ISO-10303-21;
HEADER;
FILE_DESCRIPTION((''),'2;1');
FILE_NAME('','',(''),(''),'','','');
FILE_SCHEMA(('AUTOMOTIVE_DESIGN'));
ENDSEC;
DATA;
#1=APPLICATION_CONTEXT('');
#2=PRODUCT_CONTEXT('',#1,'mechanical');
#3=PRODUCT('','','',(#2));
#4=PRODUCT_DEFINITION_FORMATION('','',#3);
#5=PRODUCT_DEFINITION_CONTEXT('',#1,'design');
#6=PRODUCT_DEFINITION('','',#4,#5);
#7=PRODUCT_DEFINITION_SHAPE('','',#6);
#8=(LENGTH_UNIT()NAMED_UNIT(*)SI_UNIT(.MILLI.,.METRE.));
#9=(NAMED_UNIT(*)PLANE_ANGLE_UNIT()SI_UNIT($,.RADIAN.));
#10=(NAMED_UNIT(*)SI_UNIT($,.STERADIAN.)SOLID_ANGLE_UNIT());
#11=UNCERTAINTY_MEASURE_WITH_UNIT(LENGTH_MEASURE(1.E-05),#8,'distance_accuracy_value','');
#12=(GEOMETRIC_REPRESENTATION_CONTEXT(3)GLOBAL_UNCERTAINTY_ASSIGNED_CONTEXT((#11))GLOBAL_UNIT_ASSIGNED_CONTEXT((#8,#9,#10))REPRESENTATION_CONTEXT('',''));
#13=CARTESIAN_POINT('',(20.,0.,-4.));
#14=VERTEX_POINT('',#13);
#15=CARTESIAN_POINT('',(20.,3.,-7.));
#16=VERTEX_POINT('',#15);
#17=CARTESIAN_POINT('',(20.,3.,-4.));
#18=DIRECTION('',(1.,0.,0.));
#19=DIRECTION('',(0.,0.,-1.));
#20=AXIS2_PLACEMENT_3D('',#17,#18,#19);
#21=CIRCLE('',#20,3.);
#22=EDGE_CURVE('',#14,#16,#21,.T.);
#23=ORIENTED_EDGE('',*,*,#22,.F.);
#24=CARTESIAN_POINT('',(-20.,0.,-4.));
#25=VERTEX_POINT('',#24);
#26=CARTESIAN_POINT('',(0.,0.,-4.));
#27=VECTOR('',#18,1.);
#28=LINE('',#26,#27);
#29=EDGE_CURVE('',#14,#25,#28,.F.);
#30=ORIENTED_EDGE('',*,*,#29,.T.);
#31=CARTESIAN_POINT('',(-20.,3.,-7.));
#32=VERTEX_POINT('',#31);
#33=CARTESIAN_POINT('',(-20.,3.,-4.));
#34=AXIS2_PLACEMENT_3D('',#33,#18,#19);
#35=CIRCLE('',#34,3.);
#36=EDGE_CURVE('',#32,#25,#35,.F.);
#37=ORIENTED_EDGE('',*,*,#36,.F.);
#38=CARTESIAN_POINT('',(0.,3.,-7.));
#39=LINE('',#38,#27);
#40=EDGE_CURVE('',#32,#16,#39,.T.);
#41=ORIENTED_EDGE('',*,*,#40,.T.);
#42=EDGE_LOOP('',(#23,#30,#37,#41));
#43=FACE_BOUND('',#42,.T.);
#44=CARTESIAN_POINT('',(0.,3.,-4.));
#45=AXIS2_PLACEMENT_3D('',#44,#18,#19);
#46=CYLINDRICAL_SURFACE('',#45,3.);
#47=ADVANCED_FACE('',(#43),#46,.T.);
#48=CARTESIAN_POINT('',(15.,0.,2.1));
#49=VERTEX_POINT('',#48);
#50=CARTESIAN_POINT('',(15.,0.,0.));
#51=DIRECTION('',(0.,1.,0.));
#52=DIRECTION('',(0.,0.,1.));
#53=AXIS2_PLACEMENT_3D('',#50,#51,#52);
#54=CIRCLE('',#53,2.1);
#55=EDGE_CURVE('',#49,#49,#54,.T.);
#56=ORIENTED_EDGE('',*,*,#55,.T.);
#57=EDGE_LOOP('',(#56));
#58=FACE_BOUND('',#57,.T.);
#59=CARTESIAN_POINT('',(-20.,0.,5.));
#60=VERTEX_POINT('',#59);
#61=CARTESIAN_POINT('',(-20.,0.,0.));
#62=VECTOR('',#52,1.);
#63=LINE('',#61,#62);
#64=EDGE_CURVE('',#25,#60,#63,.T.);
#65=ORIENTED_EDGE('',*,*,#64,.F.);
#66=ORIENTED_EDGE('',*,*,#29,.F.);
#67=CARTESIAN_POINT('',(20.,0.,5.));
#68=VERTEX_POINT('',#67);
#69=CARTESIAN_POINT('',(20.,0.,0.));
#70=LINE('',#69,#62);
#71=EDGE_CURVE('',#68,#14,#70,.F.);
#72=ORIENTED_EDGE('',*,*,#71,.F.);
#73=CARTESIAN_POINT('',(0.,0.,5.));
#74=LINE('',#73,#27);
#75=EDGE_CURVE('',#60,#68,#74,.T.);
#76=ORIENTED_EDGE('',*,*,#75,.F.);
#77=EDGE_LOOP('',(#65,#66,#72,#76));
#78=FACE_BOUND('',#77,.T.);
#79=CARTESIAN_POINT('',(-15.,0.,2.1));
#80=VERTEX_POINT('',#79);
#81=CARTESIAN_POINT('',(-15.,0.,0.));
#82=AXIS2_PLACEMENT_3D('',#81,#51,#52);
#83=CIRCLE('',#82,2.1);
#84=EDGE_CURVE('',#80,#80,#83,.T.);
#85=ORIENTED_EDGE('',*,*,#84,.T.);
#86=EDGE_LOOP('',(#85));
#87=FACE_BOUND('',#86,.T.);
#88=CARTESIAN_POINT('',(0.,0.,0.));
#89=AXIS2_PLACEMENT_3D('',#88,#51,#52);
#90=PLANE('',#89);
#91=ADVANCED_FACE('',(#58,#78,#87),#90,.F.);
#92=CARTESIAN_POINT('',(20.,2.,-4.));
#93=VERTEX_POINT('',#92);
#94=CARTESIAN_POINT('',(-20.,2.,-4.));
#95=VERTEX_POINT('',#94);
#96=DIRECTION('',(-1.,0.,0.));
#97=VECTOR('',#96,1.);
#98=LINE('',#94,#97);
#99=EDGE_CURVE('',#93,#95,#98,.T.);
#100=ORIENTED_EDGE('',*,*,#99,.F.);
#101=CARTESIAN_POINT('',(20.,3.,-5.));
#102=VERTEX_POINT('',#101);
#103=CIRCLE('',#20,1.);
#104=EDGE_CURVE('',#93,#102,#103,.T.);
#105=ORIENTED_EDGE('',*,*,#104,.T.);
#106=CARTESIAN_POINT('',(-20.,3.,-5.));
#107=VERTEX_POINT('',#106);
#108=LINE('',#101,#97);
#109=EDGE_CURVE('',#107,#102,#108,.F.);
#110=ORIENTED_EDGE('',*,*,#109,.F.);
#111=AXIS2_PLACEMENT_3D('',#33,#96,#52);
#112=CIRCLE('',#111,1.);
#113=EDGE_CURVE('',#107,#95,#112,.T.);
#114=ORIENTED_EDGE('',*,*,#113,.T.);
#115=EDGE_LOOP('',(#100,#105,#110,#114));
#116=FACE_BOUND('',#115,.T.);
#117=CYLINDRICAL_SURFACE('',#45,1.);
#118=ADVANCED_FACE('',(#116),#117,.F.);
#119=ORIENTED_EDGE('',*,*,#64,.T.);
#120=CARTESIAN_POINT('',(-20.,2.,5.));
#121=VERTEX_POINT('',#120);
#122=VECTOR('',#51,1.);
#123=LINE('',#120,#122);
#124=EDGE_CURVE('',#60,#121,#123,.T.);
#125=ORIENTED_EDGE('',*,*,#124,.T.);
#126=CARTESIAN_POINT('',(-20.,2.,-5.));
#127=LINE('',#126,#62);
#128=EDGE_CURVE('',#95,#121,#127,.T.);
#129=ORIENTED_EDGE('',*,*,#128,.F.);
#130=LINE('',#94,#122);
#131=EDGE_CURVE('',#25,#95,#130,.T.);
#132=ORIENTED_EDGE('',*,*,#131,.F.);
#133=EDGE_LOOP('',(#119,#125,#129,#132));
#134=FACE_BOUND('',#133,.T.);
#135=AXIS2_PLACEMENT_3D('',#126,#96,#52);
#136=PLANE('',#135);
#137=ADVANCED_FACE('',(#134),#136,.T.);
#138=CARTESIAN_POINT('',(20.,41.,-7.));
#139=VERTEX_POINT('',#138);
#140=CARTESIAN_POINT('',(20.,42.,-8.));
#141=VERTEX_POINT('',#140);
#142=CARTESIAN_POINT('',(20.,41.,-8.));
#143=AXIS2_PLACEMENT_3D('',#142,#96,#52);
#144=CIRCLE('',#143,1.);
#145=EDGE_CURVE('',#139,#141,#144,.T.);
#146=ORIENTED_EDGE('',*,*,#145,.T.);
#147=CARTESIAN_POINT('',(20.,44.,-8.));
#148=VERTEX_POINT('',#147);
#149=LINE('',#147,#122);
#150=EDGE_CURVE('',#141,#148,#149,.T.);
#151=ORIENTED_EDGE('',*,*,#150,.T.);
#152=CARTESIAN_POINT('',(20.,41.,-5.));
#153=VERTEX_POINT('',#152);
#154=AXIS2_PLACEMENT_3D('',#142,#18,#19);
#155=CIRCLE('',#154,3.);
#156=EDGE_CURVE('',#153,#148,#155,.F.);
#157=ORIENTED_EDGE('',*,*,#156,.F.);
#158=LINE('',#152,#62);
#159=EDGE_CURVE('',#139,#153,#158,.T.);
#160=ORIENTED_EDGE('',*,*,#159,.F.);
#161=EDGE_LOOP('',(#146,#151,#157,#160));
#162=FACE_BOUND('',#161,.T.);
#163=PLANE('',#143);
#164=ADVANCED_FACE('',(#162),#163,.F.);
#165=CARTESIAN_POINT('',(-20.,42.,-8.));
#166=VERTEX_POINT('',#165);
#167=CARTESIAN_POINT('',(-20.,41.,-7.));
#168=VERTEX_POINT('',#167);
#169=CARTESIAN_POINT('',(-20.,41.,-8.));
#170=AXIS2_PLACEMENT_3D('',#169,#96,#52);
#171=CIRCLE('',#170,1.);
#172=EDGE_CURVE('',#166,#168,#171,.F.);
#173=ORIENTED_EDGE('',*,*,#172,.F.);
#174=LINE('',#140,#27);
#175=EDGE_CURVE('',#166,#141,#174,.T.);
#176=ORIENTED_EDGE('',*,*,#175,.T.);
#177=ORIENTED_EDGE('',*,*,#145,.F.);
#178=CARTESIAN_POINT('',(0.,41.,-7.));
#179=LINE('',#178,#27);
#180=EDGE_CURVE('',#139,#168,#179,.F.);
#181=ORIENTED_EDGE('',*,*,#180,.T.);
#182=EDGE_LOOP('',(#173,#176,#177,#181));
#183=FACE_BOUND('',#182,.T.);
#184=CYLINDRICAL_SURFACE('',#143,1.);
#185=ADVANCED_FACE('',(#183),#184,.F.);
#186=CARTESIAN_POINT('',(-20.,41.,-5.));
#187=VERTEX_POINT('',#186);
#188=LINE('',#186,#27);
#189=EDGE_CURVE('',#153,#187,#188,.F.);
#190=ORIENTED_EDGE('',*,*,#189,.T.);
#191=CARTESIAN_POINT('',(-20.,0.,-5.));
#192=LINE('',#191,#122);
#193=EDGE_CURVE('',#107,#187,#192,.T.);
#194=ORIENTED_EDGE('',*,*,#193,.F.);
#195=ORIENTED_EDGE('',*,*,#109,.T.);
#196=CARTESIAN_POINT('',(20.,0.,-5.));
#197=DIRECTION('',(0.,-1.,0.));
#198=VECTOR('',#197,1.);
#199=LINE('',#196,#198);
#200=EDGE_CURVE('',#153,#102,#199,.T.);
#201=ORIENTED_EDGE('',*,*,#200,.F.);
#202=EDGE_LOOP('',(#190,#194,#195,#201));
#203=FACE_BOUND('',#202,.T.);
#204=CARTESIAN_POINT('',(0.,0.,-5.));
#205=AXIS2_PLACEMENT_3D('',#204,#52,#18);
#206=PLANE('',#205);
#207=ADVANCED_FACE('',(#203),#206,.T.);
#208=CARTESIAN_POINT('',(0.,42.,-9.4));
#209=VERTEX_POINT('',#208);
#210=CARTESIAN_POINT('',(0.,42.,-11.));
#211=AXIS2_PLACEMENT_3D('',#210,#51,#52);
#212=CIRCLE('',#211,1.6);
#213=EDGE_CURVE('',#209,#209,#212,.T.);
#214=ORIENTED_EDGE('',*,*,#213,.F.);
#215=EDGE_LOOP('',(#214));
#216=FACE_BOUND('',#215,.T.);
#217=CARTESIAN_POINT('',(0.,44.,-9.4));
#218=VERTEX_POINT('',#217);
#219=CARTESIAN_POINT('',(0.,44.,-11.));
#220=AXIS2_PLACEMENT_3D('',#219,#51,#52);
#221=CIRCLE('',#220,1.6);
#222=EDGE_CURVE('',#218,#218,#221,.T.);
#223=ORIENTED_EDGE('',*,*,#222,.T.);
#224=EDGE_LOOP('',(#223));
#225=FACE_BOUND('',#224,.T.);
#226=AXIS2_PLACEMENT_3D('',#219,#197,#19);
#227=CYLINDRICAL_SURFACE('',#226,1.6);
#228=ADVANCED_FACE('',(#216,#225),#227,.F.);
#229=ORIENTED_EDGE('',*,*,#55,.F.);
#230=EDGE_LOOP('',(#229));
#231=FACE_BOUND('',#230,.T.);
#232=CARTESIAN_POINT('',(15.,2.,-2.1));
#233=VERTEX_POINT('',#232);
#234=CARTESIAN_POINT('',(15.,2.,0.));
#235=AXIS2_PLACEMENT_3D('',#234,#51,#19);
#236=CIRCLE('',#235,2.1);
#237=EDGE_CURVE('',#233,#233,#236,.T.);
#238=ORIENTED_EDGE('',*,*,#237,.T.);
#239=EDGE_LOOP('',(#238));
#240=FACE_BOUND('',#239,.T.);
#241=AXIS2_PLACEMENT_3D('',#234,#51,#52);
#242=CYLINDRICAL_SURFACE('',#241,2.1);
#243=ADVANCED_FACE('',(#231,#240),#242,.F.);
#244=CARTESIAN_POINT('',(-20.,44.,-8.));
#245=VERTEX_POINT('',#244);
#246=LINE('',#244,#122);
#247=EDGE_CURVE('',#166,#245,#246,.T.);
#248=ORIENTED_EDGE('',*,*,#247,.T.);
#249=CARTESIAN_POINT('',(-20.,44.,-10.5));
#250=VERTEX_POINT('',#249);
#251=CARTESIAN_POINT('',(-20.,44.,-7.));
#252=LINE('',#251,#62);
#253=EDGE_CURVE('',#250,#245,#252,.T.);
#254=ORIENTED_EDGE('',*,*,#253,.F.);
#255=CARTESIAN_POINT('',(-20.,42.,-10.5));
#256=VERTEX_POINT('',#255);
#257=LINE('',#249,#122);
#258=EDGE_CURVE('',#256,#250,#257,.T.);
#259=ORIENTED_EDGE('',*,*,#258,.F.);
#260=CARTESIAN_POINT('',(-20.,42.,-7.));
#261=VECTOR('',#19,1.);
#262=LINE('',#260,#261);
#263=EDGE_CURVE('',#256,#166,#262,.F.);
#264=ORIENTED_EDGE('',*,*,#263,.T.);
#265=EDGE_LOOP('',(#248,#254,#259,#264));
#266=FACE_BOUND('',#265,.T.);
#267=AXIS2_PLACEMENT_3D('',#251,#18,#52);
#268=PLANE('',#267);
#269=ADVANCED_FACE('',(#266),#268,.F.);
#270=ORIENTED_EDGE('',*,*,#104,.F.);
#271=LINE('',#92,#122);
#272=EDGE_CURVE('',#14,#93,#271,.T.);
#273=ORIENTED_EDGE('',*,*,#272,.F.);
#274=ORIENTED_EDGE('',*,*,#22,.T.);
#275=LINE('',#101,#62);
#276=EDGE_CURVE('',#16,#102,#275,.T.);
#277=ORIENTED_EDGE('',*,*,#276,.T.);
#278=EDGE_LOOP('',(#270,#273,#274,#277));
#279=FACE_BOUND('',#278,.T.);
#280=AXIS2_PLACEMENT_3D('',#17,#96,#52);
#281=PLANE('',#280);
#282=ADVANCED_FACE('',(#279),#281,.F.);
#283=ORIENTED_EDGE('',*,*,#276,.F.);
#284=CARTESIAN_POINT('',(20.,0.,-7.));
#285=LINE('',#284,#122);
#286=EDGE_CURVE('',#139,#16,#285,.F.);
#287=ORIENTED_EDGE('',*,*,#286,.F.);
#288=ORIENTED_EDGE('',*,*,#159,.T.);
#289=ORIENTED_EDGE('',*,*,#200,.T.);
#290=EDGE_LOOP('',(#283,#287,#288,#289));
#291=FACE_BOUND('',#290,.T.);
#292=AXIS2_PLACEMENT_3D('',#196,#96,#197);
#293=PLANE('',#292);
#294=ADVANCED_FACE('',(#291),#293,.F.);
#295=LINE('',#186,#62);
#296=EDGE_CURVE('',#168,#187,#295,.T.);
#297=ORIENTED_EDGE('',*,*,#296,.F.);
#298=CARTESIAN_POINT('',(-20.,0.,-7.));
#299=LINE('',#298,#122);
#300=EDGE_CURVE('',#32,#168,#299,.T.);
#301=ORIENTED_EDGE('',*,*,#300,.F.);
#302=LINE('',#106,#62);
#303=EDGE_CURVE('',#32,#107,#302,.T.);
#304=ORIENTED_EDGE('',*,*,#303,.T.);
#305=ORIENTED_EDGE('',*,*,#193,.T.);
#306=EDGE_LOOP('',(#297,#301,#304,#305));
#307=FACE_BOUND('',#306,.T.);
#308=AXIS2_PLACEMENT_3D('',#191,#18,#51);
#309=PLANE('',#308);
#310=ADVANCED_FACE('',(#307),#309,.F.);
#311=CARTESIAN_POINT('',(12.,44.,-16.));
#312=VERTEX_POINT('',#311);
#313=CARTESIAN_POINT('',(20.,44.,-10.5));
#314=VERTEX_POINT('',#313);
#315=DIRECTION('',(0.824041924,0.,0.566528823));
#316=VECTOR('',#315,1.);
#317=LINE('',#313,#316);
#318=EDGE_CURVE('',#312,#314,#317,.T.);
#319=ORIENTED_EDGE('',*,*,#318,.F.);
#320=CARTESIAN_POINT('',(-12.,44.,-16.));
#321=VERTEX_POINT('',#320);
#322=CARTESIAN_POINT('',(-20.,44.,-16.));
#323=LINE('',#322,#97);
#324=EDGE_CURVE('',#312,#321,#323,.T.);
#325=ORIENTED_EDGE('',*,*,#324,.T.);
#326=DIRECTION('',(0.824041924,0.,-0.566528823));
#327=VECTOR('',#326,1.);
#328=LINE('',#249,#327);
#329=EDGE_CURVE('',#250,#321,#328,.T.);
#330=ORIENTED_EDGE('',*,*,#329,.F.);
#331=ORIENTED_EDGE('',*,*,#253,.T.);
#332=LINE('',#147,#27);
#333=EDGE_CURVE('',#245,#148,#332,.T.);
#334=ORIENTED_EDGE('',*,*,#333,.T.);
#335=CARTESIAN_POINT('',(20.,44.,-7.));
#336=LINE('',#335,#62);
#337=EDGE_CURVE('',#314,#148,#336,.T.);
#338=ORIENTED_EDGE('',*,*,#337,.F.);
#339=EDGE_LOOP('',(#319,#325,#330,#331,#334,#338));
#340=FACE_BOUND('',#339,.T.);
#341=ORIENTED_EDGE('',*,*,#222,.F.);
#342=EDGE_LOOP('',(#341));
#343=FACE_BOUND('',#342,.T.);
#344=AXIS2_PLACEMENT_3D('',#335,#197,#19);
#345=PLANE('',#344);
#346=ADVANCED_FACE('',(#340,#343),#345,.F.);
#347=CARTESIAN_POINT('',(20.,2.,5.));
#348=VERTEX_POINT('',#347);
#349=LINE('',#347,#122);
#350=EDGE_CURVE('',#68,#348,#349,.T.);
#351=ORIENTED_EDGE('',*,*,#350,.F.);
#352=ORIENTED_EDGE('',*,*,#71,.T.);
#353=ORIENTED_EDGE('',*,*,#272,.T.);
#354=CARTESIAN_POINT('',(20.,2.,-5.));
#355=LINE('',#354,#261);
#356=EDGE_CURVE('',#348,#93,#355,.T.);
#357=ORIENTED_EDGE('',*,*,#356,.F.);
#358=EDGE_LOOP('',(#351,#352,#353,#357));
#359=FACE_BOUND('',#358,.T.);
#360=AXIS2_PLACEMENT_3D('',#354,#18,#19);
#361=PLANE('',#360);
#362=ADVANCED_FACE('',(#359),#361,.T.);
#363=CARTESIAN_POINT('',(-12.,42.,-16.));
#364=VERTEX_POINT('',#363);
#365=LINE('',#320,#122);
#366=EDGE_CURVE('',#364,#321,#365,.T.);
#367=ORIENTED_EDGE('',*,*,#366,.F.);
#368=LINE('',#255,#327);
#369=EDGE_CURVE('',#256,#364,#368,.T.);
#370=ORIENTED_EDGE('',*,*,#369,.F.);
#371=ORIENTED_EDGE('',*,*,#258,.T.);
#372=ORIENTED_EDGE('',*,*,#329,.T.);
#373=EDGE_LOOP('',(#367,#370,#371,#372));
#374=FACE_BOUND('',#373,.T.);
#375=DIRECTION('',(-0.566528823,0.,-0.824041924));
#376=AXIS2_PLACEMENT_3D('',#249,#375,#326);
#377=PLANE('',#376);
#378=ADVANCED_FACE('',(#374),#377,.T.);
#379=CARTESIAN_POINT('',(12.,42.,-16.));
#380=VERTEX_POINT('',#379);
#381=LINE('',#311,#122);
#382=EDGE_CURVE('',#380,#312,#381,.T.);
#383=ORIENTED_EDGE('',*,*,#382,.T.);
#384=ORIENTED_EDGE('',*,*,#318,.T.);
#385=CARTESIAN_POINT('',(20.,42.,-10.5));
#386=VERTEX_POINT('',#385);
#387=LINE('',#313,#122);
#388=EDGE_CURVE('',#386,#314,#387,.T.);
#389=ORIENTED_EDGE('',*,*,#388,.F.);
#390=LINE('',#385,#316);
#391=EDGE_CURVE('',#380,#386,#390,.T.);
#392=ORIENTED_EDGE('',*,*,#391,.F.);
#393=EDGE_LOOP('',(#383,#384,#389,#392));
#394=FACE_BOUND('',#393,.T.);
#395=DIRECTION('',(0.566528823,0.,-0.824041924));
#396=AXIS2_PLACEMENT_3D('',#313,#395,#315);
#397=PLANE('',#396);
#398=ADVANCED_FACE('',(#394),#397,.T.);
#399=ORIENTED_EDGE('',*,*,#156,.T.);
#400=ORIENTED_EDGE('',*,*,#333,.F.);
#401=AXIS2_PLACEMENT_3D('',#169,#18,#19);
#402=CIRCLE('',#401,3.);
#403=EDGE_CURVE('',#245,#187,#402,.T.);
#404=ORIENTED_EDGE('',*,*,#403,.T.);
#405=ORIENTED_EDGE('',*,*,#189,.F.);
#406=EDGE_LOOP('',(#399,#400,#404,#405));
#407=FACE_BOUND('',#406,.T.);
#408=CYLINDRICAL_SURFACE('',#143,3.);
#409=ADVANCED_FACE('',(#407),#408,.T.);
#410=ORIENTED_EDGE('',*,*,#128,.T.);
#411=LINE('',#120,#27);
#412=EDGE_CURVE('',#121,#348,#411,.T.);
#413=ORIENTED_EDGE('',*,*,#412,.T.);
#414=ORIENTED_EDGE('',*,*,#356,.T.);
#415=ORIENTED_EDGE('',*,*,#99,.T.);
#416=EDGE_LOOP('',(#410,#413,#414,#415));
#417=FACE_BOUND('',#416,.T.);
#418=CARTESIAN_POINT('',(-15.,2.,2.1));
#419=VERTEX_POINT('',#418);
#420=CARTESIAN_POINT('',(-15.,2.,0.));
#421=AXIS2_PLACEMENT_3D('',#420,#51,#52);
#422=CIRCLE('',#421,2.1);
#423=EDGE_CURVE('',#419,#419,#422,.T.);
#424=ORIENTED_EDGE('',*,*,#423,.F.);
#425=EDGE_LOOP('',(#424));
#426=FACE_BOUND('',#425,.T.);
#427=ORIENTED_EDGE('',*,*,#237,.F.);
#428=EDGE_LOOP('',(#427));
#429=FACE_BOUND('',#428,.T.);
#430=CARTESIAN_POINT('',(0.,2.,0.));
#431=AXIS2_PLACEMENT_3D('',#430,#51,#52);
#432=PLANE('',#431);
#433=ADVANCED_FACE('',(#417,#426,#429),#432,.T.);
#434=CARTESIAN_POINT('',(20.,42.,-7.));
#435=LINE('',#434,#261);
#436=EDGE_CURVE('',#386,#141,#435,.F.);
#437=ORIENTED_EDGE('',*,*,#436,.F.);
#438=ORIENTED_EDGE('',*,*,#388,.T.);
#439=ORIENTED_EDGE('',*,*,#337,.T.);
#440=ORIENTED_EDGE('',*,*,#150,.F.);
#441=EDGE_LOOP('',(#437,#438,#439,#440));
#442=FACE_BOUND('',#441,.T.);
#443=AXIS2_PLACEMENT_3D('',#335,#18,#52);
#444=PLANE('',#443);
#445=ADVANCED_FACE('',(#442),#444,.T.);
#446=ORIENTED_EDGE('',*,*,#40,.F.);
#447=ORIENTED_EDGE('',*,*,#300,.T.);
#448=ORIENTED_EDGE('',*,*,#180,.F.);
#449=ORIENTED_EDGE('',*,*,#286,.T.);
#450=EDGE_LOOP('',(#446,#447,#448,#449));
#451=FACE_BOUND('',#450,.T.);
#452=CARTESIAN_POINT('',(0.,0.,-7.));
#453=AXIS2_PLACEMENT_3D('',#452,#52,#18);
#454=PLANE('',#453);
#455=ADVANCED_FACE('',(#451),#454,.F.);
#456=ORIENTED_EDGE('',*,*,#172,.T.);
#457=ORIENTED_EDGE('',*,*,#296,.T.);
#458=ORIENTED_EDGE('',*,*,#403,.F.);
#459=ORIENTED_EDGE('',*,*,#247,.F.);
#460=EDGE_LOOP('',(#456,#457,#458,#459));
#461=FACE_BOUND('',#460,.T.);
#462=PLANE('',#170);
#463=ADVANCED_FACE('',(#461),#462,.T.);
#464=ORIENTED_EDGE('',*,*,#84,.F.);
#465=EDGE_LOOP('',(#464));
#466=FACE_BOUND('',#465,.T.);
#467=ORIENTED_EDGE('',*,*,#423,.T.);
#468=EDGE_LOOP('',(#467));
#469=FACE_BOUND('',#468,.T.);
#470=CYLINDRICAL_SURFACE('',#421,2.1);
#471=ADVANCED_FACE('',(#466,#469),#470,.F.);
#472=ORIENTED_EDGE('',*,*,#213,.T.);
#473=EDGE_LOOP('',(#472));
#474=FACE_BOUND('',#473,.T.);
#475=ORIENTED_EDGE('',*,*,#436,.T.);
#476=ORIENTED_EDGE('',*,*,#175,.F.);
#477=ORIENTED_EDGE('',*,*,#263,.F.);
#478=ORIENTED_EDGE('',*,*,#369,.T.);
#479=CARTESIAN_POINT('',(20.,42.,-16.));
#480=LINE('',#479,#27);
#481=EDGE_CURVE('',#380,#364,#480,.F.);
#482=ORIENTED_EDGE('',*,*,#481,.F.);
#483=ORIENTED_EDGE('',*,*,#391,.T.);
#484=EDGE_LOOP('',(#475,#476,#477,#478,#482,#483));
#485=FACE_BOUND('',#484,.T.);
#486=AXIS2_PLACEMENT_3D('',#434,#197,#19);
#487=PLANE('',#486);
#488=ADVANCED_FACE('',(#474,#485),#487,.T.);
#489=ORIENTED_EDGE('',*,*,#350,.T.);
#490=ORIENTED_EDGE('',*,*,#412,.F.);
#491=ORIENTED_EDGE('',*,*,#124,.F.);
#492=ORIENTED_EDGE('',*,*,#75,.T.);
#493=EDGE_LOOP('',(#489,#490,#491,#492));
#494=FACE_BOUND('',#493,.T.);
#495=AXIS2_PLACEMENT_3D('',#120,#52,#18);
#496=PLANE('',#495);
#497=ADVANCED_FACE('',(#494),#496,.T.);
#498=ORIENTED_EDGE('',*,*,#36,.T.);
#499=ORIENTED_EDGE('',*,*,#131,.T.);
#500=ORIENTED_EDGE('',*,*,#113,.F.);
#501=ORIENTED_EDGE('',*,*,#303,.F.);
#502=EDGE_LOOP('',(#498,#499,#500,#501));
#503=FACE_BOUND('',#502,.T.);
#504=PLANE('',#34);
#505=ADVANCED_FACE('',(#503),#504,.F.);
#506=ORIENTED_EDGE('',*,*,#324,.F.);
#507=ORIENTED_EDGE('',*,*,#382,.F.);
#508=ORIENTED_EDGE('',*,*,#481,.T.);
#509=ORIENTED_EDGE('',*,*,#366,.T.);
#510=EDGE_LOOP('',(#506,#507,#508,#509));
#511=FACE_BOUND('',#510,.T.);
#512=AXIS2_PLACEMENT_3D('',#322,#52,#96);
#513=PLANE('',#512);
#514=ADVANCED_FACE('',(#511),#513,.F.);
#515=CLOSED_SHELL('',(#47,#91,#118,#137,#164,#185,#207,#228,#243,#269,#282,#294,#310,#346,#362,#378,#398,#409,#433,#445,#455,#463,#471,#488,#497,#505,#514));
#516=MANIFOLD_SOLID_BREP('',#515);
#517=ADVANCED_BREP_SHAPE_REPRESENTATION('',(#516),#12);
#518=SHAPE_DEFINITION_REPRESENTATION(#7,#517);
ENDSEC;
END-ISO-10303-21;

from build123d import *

# Parameters (mm, degrees)
SKETCH_2_W            = 40
SKETCH_2_H            = 10
SKETCH_2_R            = 2.1
EXTRUDE_1_DEPTH       = 2
SKETCH_3_W            = 40
SKETCH_3_H            = 44
EXTRUDE_2_DEPTH       = 2
SKETCH_4_W            = 40
SKETCH_4_H            = 11
SKETCH_4_R            = 1.6
EXTRUDE_3_DEPTH       = 2
CUT_EXTRUDE_1_DEPTH   = 51.911688245
SHEET_START           = -20
SHEET_METAL_1_DEPTH   = 40
SHEET_METAL_1_2_DEPTH = 40


# Read off the part's stored shape, not the designer's step: 转换实体1
with BuildPart() as part:
    # Sketch 2 → 凸台-拉伸1 (new body)
    with BuildSketch(Plane(origin=(0, 0, 0), x_dir=(1, 0, 0), z_dir=(0, 1, 0))):
        Rectangle(SKETCH_2_W, SKETCH_2_H)
        with Locations(Location((-15, 0, 0), (0, 0, 270))):
            Circle(SKETCH_2_R, mode=Mode.SUBTRACT)
        with Locations(Location((15, 0, 0), (0, 0, 90))):
            Circle(SKETCH_2_R, mode=Mode.SUBTRACT)
    extrude(amount=EXTRUDE_1_DEPTH)

    # 草图3 → 凸台-拉伸2 (add)
    with BuildSketch(Plane(origin=(0, 0, -5), x_dir=(-1, 0, 0), z_dir=(0, 0, -1))):
        with Locations((0, 22)):
            Rectangle(SKETCH_3_W, SKETCH_3_H)
    extrude(amount=EXTRUDE_2_DEPTH)

    # 草图4 → 凸台-拉伸3 (add)
    with BuildSketch(Plane(origin=(0, 44, 0), x_dir=(1, 0, 0), z_dir=(0, 1, 0))):
        with Locations((0, 10.5)):
            Rectangle(SKETCH_4_W, SKETCH_4_H)
        with Locations(Location((0, 11, 0), (0, 0, 270))):
            Circle(SKETCH_4_R, mode=Mode.SUBTRACT)
    extrude(amount=-EXTRUDE_3_DEPTH)

    # 草图5 → 切除-拉伸1 (cut, through all)
    with BuildSketch(Plane(origin=(0, 44, 0), x_dir=(1, 0, 0), z_dir=(0, 1, 0))):
        Polygon((-20, 16), (-20, 10.5), (-12, 16), align=None)
        Polygon((20, 10.5), (12, 16), (20, 16), align=None)
    extrude(amount=-CUT_EXTRUDE_1_DEPTH, mode=Mode.SUBTRACT)

    # Sheet Metal 1 outline → Sheet Metal 1 (cut)
    with BuildSketch(Plane.YZ.offset(SHEET_START)):
        with BuildLine():
            Line((44, -5), (41, -5))
            ThreePointArc((41, -5), (43.121320344, -5.878679656), (44, -8))
            Line((44, -8), (44, -5))
        make_face()
        with BuildLine():
            ThreePointArc((3, -7), (0.878679656, -6.121320344), (0, -4))
            Line((0, -4), (0, -7))
            Line((0, -7), (3, -7))
        make_face()
    extrude(amount=SHEET_METAL_1_DEPTH, mode=Mode.SUBTRACT)

    # Sheet Metal 1 2 outline → Sheet Metal 1 2 (add)
    with BuildSketch(Plane.YZ.offset(SHEET_START)):
        with BuildLine():
            ThreePointArc((3, -5), (2.292893219, -4.707106781), (2, -4))
            Line((2, -4), (2, -5))
            Line((2, -5), (3, -5))
        make_face()
        with BuildLine():
            Line((42, -7), (41, -7))
            ThreePointArc((41, -7), (41.707106781, -7.292893219), (42, -8))
            Line((42, -8), (42, -7))
        make_face()
    extrude(amount=SHEET_METAL_1_2_DEPTH)


solid = part.part
